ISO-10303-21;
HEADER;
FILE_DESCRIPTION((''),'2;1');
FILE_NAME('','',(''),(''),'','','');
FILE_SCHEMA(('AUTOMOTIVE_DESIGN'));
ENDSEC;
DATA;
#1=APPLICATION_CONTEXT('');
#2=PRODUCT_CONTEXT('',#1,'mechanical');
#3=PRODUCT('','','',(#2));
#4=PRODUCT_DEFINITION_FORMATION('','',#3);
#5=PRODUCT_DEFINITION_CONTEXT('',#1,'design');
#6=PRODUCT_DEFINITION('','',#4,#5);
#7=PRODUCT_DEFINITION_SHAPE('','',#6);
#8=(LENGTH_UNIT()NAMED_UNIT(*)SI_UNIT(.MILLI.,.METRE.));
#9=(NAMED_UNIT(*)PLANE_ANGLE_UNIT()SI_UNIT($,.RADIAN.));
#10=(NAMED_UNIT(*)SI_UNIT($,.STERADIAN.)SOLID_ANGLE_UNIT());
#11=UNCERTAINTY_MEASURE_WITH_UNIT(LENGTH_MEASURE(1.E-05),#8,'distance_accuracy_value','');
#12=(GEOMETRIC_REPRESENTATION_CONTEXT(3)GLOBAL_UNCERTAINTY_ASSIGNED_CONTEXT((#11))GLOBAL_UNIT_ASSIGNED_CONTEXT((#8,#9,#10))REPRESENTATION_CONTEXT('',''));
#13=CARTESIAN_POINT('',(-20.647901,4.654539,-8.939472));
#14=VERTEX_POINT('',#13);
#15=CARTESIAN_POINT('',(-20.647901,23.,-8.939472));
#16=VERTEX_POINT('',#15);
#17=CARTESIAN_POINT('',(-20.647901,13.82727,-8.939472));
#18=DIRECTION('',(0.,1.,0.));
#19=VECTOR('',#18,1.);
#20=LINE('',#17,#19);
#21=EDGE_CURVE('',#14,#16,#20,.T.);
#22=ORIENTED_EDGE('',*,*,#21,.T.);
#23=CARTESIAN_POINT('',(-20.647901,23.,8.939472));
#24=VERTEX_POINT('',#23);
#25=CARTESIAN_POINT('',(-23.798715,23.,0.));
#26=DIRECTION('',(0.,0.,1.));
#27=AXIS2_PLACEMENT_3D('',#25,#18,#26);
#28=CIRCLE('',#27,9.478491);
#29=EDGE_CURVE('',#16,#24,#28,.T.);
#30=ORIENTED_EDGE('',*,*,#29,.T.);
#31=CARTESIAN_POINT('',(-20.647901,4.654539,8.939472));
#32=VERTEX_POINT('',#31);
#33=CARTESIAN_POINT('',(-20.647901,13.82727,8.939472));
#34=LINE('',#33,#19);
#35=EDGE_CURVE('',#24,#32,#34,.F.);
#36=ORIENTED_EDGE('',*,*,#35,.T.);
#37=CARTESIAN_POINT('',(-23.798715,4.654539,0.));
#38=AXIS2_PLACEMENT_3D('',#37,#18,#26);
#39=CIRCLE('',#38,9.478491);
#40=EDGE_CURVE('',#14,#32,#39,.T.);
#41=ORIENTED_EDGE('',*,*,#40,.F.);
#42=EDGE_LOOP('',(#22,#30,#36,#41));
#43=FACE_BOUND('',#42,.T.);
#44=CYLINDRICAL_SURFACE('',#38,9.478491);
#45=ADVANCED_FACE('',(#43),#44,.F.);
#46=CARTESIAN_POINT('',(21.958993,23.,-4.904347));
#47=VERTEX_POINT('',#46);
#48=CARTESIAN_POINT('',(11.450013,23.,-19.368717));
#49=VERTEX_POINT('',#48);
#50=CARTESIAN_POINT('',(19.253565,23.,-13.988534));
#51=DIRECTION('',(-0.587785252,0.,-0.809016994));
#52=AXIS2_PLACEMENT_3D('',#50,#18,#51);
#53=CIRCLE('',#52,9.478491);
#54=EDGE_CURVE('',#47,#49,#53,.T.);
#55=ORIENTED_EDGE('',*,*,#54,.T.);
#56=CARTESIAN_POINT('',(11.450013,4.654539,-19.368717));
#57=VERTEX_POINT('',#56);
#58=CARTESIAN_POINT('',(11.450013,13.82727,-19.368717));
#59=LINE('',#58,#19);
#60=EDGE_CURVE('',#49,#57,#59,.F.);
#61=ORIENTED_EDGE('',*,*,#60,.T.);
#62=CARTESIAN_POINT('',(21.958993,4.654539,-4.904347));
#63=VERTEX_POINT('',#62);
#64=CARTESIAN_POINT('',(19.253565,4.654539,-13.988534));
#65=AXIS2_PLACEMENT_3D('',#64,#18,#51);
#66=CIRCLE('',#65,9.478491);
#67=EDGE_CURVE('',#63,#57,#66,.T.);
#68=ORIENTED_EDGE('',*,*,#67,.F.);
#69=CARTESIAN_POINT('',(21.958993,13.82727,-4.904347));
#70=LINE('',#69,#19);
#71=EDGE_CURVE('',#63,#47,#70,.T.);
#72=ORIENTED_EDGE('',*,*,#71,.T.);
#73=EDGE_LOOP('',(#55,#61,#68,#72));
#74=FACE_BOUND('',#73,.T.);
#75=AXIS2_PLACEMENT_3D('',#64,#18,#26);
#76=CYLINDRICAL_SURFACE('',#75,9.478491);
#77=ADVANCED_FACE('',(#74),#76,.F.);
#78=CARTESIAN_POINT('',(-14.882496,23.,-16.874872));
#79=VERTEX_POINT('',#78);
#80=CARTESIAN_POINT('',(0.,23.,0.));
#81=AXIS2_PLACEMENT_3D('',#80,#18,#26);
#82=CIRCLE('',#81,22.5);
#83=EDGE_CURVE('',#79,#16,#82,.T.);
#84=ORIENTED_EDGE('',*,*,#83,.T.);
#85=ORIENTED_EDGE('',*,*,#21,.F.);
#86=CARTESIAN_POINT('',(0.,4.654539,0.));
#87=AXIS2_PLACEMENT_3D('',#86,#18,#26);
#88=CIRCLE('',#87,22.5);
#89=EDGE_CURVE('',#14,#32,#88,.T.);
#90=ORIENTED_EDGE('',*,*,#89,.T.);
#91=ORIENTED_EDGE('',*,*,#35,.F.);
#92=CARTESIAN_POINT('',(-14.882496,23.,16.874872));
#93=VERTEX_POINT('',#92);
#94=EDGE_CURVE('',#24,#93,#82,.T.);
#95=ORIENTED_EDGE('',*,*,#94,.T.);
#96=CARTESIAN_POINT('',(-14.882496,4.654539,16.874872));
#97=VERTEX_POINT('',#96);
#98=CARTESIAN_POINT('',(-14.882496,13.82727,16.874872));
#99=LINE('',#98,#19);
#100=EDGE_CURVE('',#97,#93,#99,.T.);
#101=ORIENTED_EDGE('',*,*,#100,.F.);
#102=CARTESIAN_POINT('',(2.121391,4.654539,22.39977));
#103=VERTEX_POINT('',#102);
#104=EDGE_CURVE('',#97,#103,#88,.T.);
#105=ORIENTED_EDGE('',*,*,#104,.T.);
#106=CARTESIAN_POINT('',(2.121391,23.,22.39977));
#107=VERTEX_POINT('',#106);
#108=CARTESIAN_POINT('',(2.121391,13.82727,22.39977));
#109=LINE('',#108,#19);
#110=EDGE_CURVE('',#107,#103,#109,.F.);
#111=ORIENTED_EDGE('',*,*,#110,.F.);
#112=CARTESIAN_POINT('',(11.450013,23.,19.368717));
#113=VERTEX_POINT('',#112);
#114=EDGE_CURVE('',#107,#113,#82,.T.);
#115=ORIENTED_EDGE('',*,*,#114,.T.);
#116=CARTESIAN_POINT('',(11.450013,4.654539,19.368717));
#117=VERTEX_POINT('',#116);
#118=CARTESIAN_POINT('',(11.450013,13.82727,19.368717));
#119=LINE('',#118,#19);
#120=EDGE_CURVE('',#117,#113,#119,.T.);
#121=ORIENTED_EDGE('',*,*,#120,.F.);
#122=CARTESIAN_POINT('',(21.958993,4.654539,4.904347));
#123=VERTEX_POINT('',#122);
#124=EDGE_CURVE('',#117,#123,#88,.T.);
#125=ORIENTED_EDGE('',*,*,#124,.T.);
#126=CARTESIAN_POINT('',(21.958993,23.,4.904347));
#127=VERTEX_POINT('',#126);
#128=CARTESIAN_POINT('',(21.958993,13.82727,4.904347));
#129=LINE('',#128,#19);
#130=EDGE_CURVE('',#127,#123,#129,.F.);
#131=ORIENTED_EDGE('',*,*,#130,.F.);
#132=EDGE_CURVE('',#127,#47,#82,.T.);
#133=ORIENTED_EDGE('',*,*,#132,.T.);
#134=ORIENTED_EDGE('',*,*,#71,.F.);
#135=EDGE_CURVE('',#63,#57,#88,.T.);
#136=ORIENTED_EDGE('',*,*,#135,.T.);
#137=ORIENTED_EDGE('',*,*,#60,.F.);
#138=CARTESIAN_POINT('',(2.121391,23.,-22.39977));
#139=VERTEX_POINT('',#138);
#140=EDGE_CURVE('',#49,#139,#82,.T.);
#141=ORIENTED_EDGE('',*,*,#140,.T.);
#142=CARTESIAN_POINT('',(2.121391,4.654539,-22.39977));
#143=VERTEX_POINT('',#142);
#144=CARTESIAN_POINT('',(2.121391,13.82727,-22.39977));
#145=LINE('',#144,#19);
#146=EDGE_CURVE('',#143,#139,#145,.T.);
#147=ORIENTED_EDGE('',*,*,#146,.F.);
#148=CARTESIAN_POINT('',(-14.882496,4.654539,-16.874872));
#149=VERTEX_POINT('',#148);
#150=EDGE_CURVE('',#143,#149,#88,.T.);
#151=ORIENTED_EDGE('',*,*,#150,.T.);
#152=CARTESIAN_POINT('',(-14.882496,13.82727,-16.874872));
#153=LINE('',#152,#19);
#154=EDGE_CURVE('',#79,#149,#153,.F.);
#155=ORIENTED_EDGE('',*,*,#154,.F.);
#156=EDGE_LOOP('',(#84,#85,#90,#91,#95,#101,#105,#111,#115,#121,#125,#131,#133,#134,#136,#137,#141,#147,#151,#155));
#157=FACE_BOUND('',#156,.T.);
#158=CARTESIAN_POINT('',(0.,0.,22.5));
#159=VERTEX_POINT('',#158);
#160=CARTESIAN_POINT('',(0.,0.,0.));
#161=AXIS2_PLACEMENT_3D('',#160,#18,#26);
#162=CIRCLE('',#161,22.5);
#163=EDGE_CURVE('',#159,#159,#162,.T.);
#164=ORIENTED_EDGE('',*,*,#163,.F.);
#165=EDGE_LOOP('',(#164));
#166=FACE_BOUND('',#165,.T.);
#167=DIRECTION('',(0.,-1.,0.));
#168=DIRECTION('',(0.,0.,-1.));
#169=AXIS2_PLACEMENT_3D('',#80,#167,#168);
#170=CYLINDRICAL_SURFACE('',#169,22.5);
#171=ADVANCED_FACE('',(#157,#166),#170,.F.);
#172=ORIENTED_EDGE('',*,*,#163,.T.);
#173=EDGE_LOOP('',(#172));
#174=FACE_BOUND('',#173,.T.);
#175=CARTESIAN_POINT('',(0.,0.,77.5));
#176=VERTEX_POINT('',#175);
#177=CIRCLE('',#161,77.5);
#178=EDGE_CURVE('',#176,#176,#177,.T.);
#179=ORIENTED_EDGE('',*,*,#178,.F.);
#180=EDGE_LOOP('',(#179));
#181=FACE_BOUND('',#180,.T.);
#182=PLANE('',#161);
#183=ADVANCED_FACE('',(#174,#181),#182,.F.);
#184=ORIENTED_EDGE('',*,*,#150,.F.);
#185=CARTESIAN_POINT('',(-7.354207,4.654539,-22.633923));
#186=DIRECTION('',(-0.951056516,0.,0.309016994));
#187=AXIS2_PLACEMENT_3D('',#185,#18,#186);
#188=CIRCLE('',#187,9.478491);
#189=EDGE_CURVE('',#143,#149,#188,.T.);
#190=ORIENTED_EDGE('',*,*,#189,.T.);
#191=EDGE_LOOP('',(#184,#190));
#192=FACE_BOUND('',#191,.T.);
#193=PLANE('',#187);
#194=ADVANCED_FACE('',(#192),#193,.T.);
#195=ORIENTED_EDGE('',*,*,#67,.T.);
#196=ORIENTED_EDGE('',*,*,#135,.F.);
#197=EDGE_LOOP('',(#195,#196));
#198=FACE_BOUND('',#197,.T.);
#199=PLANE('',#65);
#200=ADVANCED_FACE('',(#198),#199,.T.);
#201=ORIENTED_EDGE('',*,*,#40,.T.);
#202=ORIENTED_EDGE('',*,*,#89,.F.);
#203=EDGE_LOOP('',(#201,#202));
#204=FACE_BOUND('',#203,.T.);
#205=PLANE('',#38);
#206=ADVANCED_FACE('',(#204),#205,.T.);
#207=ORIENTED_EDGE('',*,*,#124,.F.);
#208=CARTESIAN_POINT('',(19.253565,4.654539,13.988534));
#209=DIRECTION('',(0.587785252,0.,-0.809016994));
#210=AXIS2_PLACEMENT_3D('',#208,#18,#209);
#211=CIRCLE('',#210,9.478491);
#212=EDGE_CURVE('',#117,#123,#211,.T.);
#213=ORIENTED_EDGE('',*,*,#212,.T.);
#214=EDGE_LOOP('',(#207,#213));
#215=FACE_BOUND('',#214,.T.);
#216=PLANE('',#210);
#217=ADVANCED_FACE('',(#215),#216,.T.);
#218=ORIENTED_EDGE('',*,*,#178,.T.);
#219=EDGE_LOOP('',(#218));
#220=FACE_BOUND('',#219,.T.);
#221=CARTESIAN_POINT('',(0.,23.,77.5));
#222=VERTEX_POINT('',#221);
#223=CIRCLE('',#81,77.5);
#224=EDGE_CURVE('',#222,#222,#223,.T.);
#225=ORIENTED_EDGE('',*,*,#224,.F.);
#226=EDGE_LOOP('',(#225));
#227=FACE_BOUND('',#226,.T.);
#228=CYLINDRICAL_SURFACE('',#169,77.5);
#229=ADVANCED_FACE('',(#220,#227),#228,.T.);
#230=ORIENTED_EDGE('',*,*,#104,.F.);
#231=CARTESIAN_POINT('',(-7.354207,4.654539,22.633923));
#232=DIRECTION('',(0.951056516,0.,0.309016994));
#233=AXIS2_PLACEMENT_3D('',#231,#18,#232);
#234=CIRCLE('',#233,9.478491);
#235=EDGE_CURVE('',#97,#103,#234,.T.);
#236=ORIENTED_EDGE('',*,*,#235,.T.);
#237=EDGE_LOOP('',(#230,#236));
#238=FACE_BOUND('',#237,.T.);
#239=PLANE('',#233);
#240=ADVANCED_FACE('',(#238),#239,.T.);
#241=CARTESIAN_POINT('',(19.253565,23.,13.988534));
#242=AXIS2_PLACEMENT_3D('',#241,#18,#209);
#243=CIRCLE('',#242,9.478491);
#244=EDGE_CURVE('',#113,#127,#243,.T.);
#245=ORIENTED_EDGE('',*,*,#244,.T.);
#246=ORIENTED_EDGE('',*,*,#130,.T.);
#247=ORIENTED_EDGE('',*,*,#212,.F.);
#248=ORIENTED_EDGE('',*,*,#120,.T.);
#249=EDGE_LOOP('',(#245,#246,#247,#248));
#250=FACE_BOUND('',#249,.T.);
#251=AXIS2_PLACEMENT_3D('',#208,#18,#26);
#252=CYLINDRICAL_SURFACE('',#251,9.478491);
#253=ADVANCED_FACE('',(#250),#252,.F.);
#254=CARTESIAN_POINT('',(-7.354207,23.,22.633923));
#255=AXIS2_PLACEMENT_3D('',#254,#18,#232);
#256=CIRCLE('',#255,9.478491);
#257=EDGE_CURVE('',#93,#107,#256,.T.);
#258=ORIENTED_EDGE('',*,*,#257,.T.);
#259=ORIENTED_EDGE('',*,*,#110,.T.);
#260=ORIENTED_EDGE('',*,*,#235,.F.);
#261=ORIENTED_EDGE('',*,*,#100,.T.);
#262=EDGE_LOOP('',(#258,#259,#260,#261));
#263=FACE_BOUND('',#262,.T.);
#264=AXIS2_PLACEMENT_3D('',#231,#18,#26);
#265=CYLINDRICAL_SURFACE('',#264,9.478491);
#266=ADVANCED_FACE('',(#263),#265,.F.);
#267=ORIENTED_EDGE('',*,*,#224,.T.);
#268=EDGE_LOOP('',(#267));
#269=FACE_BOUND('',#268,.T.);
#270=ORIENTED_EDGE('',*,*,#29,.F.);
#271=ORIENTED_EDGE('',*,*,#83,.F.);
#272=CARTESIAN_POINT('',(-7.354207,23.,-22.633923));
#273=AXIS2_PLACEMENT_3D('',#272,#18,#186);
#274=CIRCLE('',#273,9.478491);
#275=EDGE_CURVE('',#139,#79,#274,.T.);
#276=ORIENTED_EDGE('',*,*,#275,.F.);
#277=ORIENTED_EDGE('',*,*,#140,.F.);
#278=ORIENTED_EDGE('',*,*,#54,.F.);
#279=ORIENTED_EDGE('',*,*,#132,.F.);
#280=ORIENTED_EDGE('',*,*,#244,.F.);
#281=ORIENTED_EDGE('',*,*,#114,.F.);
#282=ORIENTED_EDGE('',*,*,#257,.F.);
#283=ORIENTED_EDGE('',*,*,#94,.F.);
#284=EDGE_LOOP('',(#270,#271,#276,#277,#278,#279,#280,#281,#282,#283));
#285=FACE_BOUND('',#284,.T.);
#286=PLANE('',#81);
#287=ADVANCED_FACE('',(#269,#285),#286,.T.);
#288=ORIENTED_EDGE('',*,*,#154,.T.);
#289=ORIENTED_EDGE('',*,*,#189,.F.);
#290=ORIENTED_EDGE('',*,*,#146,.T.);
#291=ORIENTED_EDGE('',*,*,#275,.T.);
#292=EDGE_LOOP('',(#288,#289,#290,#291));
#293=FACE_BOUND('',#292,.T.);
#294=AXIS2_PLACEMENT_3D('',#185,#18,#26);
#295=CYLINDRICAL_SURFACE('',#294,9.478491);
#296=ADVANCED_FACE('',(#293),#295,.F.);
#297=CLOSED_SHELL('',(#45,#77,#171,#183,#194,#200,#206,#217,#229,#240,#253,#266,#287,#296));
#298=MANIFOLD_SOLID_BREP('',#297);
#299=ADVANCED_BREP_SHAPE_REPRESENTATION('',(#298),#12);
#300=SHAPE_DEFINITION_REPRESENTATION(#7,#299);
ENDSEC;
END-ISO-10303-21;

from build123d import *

# Parameters (mm, degrees)
SKETCH1_R           = 77.5
BOSS_EXTRUDE1_DEPTH = 23
SKETCH2_R           = 22.5
CUT_EXTRUDE1_DEPTH  = 112.98883873
SKETCH3_R           = 9.478491171
CUT_EXTRUDE2_DEPTH  = 18.345460798
CIRPATTERN1_COUNT   = 5


with BuildPart() as part:
    # Sketch1 → Boss-Extrude1 (new body)
    with BuildSketch(Plane(origin=(0, 0, 0), x_dir=(1, 0, 0), z_dir=(0, 1, 0))):
        Circle(SKETCH1_R)
    extrude(amount=BOSS_EXTRUDE1_DEPTH)

    # Sketch2 → Cut-Extrude1 (cut, through all)
    with BuildSketch(Plane(origin=(0, 0, 0), x_dir=(1, 0, 0), z_dir=(0, 1, 0))):
        Circle(SKETCH2_R)
    extrude(amount=CUT_EXTRUDE1_DEPTH, mode=Mode.SUBTRACT)

    # Sketch3 → Cut-Extrude2 (cut)
    with BuildSketch(Plane(origin=(0, 23, 0), x_dir=(1, 0, 0), z_dir=(0, 1, 0))):
        with Locations((-23.798715217, 0)):
            Circle(SKETCH3_R)
    cut_extrude2 = extrude(amount=-CUT_EXTRUDE2_DEPTH, mode=Mode.SUBTRACT)

    # CirPattern1: Cut-Extrude2 ×5 about axis
    cirpattern1_axis = Axis((0, 0, 0), (0, 1, 0))
    for i in range(1, CIRPATTERN1_COUNT):
        add(cut_extrude2.rotate(cirpattern1_axis, i * 360 / CIRPATTERN1_COUNT), mode=Mode.SUBTRACT)


solid = part.part
